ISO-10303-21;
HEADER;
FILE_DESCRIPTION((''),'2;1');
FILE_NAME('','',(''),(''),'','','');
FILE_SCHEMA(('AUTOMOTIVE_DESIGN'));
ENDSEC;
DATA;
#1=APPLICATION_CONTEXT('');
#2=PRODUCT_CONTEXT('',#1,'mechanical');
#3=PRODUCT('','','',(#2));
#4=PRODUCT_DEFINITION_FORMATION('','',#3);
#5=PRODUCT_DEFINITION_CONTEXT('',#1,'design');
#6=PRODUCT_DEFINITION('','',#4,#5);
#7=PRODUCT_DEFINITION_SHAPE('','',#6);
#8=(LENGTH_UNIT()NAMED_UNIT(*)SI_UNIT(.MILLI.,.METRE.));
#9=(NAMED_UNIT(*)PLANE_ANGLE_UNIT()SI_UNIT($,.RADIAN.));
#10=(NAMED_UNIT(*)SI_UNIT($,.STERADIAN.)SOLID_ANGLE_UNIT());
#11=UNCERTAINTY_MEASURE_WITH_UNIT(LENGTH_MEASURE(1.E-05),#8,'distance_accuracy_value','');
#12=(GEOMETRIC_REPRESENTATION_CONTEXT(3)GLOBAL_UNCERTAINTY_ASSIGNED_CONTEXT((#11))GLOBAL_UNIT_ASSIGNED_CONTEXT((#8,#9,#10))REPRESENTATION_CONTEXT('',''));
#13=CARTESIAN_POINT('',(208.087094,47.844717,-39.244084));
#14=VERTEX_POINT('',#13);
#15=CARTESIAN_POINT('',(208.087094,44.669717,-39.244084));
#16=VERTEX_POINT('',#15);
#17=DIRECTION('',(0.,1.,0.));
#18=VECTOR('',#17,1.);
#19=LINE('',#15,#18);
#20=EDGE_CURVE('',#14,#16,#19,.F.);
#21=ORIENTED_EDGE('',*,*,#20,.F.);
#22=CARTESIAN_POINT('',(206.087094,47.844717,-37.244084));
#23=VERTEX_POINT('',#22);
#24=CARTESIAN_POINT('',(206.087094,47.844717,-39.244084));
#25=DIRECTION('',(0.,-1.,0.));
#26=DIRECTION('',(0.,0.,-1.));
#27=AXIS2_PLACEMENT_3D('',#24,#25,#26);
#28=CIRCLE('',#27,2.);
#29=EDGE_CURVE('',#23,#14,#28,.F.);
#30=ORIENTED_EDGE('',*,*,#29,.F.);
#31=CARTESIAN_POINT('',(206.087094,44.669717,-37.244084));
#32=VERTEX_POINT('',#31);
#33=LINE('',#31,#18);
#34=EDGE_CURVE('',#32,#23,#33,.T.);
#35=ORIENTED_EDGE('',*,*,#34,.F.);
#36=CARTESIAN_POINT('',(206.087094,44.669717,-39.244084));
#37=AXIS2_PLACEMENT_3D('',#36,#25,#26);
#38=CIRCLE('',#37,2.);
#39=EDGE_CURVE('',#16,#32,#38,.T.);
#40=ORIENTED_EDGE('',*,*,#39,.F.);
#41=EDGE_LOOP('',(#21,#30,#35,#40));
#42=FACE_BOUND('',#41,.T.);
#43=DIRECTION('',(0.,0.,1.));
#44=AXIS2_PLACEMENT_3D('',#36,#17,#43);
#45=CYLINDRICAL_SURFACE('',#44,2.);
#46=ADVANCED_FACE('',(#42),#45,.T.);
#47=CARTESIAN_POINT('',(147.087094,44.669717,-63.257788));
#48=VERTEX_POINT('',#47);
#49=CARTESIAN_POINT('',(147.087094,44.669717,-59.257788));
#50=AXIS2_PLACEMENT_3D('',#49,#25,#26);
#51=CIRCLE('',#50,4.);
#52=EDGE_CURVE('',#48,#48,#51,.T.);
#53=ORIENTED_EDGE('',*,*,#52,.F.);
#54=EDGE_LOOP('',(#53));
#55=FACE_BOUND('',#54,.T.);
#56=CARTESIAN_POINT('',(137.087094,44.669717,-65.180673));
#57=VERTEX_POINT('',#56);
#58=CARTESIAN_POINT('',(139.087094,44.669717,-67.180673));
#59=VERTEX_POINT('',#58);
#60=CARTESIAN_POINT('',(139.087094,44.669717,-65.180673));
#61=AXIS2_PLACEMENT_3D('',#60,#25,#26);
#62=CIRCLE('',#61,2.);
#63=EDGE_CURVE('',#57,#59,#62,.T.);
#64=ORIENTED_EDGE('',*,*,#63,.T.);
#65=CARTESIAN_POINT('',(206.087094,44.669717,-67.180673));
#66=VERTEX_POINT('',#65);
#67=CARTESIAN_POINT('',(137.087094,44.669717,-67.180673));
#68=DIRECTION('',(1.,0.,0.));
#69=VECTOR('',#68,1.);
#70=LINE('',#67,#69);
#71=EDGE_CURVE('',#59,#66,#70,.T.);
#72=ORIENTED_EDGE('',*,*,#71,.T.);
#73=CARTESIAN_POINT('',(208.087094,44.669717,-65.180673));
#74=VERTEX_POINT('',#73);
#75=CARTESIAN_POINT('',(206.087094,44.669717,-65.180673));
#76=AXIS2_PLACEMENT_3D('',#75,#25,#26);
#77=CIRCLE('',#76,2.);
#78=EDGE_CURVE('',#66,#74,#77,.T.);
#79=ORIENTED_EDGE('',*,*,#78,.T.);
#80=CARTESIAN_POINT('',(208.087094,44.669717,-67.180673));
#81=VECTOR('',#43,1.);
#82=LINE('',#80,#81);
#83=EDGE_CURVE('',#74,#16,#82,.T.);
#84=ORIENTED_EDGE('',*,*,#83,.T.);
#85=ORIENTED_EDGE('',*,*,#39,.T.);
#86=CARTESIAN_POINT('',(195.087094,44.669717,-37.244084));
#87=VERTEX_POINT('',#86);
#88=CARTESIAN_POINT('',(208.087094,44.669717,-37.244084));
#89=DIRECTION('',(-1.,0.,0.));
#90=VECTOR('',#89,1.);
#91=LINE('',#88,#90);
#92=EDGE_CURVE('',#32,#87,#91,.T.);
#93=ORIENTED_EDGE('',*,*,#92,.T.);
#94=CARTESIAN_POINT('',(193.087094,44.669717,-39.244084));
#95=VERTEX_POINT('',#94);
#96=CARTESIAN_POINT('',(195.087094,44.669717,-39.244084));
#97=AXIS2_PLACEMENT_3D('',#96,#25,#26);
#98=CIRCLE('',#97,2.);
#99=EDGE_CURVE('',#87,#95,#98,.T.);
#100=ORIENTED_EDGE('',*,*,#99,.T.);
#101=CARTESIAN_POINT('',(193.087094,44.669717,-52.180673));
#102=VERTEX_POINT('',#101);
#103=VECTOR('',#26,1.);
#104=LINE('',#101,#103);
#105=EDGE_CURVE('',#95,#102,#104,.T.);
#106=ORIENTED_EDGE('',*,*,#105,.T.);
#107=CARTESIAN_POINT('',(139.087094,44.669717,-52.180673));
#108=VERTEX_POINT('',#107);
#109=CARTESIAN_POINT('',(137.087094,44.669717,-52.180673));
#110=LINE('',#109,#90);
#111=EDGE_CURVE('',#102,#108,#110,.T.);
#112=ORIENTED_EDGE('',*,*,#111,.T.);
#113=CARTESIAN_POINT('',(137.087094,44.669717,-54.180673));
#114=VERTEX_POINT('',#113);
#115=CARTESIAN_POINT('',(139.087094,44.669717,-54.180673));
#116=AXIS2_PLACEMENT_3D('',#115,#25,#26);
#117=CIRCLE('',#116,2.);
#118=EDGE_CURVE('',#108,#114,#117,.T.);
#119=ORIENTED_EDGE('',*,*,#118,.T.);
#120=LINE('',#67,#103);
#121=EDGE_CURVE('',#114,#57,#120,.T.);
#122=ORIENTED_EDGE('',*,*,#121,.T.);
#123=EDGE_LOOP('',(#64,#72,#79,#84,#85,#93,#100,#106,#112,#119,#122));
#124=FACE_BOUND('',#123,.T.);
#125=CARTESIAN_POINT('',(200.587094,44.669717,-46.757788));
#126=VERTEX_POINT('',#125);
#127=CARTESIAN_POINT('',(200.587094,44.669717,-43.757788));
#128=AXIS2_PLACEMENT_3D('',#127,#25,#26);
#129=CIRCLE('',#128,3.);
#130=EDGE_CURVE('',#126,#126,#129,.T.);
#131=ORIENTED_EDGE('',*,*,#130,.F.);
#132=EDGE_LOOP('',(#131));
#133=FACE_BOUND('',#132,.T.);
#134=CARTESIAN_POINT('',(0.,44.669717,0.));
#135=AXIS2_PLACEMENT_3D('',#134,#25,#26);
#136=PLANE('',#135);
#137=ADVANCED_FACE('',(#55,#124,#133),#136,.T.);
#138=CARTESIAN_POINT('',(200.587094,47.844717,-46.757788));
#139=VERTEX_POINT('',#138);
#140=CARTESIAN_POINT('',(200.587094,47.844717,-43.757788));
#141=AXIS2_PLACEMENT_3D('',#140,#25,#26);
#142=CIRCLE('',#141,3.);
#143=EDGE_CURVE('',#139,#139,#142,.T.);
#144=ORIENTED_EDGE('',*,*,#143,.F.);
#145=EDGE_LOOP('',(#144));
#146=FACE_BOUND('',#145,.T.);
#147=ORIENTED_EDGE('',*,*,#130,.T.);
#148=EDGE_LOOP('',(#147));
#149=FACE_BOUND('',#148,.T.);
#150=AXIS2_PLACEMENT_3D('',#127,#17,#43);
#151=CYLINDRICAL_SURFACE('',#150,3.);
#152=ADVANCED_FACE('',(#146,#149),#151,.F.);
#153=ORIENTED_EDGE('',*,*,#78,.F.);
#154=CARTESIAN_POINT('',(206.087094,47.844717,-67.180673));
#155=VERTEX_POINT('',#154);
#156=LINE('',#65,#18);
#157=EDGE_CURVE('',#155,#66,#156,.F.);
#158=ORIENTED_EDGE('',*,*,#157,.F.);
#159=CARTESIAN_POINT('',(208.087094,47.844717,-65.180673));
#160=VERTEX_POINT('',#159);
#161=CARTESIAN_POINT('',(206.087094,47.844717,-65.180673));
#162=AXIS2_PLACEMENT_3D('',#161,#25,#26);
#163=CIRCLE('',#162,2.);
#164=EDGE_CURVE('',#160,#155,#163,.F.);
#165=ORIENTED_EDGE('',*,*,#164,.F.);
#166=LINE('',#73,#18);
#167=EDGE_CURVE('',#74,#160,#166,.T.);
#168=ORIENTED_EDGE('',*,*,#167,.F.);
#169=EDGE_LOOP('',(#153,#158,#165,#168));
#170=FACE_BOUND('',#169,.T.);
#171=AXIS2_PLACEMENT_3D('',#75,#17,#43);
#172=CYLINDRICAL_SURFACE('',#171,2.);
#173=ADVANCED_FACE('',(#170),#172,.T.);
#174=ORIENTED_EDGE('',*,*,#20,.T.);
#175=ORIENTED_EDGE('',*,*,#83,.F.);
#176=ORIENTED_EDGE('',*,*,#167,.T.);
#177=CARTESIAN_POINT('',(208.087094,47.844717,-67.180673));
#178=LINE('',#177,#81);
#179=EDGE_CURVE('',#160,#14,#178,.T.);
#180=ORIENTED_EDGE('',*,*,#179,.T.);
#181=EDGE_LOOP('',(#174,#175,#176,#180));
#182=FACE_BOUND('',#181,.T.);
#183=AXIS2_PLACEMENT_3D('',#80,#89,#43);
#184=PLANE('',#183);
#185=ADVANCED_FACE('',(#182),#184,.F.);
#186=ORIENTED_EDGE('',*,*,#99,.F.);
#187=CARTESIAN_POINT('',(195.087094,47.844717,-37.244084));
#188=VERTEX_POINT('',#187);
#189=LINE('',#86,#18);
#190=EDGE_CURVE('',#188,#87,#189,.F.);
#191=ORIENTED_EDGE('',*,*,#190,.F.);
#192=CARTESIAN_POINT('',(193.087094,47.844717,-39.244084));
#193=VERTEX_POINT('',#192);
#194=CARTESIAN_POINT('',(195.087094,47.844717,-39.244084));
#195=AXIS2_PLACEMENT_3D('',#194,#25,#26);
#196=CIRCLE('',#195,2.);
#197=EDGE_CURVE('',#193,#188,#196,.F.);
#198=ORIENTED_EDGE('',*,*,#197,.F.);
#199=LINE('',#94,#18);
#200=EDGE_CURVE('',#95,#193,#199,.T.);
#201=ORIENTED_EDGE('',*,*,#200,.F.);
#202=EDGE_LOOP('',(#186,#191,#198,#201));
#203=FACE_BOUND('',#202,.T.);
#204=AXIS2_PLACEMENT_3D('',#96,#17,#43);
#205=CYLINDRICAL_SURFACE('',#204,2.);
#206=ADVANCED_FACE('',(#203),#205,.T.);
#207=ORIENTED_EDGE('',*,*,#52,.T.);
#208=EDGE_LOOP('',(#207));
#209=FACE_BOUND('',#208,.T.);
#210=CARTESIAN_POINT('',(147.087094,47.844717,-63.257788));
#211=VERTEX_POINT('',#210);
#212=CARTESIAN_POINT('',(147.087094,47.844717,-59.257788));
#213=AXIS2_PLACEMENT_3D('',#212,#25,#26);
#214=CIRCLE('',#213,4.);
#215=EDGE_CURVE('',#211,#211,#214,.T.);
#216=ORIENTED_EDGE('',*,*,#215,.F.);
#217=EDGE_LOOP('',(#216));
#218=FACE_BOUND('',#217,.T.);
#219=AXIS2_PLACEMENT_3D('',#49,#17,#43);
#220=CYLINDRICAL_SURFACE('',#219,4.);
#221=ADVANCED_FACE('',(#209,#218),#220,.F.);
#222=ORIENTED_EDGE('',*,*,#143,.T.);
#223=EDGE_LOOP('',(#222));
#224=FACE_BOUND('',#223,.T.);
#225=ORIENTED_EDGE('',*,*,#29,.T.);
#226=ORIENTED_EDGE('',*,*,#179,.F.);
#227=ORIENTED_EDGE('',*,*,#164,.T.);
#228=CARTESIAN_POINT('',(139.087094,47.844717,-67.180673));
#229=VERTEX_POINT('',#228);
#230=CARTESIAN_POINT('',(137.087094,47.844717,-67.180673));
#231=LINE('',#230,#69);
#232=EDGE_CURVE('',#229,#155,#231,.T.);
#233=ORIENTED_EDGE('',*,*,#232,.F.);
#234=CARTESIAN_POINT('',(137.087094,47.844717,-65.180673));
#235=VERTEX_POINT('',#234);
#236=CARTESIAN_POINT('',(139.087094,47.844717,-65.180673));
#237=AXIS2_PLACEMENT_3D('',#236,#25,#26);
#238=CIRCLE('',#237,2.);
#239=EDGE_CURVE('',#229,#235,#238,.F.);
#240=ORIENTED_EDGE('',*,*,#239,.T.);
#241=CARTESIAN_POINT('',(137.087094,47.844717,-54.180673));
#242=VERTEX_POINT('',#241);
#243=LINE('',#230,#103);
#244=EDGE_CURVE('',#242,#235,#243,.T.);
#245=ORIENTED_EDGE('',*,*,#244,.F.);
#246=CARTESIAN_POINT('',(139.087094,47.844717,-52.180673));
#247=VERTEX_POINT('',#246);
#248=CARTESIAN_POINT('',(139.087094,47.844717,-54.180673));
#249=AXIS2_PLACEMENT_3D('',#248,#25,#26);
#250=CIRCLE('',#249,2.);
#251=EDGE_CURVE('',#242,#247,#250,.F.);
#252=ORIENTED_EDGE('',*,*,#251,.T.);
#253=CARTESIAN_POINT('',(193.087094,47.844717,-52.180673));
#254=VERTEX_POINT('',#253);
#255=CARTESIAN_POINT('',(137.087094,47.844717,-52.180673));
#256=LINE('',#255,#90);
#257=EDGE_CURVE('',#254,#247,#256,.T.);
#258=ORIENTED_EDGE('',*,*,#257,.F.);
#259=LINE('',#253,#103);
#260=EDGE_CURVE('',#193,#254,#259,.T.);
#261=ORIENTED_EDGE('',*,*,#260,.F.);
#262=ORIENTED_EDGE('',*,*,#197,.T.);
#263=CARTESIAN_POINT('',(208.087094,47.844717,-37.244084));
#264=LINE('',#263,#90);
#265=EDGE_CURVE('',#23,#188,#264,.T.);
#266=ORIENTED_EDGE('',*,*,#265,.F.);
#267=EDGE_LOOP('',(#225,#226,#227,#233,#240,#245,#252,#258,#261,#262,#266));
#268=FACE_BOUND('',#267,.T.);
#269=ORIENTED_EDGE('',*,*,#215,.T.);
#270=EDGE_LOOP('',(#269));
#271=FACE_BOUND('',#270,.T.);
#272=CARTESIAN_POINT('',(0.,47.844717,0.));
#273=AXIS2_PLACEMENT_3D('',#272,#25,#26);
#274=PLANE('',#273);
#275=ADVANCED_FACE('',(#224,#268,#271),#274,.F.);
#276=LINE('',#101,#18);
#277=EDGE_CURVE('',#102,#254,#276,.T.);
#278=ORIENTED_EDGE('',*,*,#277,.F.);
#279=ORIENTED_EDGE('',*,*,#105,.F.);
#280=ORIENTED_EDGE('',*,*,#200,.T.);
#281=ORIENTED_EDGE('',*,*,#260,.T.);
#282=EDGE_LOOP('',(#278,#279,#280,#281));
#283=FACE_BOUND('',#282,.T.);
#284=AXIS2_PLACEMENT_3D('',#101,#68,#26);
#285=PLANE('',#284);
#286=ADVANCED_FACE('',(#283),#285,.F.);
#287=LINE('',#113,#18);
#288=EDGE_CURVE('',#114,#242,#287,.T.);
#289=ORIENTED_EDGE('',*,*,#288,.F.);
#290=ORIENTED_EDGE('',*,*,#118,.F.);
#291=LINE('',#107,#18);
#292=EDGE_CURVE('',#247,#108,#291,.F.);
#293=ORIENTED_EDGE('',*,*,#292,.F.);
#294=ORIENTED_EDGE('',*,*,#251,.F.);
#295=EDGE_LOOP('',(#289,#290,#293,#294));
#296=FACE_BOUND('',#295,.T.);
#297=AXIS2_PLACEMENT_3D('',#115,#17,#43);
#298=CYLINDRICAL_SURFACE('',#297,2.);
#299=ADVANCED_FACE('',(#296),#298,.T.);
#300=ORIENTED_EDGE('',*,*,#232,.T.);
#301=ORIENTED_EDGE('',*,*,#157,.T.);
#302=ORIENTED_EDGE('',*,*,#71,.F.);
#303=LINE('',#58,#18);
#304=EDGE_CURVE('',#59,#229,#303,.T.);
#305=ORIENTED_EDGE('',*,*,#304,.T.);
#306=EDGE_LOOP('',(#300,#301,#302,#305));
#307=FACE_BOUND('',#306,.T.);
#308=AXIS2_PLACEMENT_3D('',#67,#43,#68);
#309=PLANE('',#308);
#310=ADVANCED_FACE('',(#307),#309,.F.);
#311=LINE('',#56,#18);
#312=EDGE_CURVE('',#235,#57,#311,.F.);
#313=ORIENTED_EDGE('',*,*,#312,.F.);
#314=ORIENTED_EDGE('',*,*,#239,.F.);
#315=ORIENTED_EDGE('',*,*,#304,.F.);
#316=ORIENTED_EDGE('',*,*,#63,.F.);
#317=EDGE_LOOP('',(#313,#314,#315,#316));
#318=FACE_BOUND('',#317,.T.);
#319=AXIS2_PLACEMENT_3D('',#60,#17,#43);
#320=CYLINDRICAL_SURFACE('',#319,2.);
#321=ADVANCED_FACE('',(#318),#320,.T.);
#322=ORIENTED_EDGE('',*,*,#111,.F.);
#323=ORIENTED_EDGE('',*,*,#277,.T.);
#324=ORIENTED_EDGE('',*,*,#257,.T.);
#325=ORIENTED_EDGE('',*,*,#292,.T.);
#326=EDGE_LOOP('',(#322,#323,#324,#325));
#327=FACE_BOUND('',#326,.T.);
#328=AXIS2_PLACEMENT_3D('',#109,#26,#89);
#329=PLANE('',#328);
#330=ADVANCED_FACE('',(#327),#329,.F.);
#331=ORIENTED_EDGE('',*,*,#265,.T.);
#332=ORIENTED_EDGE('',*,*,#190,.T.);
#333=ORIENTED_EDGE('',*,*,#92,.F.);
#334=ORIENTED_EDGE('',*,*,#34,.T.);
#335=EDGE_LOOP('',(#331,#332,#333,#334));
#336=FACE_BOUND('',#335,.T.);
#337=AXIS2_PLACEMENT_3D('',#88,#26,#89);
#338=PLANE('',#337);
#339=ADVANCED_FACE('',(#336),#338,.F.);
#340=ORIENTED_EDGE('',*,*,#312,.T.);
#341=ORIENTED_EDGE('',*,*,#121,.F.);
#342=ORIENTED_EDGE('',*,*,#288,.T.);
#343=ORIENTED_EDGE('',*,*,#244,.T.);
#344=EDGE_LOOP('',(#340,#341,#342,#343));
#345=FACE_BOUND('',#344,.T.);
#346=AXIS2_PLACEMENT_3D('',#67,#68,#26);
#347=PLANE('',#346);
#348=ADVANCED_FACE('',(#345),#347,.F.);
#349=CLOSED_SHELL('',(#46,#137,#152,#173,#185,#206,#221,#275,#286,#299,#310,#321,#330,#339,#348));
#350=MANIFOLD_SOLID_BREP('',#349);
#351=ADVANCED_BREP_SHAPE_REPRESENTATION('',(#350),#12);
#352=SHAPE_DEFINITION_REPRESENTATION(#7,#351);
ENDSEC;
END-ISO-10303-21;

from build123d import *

# Parameters (mm, degrees)
SKETCH2_R          = 4
SKETCH2_R_2        = 3
BASE_FLANGE1_DEPTH = 3.175
FILLET1_R          = 2


# Sheet-metal steps are written as plain solids
with BuildPart() as part:
    # Sketch2 → Base-Flange1 (new body)
    with BuildSketch(Plane.XZ.offset(-47.844717124)):
        Polygon((208.087093798, -67.18067292), (208.087093798, -37.24408426), (193.087093798, -37.24408426), (193.087093798, -52.18067292), (137.087093798, -52.18067292), (137.087093798, -67.18067292), align=None)
        with Locations(Location((147.087093798, -59.257788189, 0), (0, 0, 270))):
            Circle(SKETCH2_R, mode=Mode.SUBTRACT)
        with Locations(Location((200.587093798, -43.757788189, 0), (0, 0, 270))):
            Circle(SKETCH2_R_2, mode=Mode.SUBTRACT)
    extrude(amount=BASE_FLANGE1_DEPTH)

    # Fillet1
    fillet1_edges = [part.edges().sort_by_distance(p)[0] for p in [
        (193.087093798, 46.257217124, -37.24408426),
        (208.087093798, 46.257217124, -37.24408426),
        (208.087093798, 46.257217124, -67.18067292),
        (137.087093798, 46.257217124, -67.18067292),
        (137.087093798, 46.257217124, -52.18067292),
    ]]
    fillet(fillet1_edges, radius=FILLET1_R)


solid = part.part
